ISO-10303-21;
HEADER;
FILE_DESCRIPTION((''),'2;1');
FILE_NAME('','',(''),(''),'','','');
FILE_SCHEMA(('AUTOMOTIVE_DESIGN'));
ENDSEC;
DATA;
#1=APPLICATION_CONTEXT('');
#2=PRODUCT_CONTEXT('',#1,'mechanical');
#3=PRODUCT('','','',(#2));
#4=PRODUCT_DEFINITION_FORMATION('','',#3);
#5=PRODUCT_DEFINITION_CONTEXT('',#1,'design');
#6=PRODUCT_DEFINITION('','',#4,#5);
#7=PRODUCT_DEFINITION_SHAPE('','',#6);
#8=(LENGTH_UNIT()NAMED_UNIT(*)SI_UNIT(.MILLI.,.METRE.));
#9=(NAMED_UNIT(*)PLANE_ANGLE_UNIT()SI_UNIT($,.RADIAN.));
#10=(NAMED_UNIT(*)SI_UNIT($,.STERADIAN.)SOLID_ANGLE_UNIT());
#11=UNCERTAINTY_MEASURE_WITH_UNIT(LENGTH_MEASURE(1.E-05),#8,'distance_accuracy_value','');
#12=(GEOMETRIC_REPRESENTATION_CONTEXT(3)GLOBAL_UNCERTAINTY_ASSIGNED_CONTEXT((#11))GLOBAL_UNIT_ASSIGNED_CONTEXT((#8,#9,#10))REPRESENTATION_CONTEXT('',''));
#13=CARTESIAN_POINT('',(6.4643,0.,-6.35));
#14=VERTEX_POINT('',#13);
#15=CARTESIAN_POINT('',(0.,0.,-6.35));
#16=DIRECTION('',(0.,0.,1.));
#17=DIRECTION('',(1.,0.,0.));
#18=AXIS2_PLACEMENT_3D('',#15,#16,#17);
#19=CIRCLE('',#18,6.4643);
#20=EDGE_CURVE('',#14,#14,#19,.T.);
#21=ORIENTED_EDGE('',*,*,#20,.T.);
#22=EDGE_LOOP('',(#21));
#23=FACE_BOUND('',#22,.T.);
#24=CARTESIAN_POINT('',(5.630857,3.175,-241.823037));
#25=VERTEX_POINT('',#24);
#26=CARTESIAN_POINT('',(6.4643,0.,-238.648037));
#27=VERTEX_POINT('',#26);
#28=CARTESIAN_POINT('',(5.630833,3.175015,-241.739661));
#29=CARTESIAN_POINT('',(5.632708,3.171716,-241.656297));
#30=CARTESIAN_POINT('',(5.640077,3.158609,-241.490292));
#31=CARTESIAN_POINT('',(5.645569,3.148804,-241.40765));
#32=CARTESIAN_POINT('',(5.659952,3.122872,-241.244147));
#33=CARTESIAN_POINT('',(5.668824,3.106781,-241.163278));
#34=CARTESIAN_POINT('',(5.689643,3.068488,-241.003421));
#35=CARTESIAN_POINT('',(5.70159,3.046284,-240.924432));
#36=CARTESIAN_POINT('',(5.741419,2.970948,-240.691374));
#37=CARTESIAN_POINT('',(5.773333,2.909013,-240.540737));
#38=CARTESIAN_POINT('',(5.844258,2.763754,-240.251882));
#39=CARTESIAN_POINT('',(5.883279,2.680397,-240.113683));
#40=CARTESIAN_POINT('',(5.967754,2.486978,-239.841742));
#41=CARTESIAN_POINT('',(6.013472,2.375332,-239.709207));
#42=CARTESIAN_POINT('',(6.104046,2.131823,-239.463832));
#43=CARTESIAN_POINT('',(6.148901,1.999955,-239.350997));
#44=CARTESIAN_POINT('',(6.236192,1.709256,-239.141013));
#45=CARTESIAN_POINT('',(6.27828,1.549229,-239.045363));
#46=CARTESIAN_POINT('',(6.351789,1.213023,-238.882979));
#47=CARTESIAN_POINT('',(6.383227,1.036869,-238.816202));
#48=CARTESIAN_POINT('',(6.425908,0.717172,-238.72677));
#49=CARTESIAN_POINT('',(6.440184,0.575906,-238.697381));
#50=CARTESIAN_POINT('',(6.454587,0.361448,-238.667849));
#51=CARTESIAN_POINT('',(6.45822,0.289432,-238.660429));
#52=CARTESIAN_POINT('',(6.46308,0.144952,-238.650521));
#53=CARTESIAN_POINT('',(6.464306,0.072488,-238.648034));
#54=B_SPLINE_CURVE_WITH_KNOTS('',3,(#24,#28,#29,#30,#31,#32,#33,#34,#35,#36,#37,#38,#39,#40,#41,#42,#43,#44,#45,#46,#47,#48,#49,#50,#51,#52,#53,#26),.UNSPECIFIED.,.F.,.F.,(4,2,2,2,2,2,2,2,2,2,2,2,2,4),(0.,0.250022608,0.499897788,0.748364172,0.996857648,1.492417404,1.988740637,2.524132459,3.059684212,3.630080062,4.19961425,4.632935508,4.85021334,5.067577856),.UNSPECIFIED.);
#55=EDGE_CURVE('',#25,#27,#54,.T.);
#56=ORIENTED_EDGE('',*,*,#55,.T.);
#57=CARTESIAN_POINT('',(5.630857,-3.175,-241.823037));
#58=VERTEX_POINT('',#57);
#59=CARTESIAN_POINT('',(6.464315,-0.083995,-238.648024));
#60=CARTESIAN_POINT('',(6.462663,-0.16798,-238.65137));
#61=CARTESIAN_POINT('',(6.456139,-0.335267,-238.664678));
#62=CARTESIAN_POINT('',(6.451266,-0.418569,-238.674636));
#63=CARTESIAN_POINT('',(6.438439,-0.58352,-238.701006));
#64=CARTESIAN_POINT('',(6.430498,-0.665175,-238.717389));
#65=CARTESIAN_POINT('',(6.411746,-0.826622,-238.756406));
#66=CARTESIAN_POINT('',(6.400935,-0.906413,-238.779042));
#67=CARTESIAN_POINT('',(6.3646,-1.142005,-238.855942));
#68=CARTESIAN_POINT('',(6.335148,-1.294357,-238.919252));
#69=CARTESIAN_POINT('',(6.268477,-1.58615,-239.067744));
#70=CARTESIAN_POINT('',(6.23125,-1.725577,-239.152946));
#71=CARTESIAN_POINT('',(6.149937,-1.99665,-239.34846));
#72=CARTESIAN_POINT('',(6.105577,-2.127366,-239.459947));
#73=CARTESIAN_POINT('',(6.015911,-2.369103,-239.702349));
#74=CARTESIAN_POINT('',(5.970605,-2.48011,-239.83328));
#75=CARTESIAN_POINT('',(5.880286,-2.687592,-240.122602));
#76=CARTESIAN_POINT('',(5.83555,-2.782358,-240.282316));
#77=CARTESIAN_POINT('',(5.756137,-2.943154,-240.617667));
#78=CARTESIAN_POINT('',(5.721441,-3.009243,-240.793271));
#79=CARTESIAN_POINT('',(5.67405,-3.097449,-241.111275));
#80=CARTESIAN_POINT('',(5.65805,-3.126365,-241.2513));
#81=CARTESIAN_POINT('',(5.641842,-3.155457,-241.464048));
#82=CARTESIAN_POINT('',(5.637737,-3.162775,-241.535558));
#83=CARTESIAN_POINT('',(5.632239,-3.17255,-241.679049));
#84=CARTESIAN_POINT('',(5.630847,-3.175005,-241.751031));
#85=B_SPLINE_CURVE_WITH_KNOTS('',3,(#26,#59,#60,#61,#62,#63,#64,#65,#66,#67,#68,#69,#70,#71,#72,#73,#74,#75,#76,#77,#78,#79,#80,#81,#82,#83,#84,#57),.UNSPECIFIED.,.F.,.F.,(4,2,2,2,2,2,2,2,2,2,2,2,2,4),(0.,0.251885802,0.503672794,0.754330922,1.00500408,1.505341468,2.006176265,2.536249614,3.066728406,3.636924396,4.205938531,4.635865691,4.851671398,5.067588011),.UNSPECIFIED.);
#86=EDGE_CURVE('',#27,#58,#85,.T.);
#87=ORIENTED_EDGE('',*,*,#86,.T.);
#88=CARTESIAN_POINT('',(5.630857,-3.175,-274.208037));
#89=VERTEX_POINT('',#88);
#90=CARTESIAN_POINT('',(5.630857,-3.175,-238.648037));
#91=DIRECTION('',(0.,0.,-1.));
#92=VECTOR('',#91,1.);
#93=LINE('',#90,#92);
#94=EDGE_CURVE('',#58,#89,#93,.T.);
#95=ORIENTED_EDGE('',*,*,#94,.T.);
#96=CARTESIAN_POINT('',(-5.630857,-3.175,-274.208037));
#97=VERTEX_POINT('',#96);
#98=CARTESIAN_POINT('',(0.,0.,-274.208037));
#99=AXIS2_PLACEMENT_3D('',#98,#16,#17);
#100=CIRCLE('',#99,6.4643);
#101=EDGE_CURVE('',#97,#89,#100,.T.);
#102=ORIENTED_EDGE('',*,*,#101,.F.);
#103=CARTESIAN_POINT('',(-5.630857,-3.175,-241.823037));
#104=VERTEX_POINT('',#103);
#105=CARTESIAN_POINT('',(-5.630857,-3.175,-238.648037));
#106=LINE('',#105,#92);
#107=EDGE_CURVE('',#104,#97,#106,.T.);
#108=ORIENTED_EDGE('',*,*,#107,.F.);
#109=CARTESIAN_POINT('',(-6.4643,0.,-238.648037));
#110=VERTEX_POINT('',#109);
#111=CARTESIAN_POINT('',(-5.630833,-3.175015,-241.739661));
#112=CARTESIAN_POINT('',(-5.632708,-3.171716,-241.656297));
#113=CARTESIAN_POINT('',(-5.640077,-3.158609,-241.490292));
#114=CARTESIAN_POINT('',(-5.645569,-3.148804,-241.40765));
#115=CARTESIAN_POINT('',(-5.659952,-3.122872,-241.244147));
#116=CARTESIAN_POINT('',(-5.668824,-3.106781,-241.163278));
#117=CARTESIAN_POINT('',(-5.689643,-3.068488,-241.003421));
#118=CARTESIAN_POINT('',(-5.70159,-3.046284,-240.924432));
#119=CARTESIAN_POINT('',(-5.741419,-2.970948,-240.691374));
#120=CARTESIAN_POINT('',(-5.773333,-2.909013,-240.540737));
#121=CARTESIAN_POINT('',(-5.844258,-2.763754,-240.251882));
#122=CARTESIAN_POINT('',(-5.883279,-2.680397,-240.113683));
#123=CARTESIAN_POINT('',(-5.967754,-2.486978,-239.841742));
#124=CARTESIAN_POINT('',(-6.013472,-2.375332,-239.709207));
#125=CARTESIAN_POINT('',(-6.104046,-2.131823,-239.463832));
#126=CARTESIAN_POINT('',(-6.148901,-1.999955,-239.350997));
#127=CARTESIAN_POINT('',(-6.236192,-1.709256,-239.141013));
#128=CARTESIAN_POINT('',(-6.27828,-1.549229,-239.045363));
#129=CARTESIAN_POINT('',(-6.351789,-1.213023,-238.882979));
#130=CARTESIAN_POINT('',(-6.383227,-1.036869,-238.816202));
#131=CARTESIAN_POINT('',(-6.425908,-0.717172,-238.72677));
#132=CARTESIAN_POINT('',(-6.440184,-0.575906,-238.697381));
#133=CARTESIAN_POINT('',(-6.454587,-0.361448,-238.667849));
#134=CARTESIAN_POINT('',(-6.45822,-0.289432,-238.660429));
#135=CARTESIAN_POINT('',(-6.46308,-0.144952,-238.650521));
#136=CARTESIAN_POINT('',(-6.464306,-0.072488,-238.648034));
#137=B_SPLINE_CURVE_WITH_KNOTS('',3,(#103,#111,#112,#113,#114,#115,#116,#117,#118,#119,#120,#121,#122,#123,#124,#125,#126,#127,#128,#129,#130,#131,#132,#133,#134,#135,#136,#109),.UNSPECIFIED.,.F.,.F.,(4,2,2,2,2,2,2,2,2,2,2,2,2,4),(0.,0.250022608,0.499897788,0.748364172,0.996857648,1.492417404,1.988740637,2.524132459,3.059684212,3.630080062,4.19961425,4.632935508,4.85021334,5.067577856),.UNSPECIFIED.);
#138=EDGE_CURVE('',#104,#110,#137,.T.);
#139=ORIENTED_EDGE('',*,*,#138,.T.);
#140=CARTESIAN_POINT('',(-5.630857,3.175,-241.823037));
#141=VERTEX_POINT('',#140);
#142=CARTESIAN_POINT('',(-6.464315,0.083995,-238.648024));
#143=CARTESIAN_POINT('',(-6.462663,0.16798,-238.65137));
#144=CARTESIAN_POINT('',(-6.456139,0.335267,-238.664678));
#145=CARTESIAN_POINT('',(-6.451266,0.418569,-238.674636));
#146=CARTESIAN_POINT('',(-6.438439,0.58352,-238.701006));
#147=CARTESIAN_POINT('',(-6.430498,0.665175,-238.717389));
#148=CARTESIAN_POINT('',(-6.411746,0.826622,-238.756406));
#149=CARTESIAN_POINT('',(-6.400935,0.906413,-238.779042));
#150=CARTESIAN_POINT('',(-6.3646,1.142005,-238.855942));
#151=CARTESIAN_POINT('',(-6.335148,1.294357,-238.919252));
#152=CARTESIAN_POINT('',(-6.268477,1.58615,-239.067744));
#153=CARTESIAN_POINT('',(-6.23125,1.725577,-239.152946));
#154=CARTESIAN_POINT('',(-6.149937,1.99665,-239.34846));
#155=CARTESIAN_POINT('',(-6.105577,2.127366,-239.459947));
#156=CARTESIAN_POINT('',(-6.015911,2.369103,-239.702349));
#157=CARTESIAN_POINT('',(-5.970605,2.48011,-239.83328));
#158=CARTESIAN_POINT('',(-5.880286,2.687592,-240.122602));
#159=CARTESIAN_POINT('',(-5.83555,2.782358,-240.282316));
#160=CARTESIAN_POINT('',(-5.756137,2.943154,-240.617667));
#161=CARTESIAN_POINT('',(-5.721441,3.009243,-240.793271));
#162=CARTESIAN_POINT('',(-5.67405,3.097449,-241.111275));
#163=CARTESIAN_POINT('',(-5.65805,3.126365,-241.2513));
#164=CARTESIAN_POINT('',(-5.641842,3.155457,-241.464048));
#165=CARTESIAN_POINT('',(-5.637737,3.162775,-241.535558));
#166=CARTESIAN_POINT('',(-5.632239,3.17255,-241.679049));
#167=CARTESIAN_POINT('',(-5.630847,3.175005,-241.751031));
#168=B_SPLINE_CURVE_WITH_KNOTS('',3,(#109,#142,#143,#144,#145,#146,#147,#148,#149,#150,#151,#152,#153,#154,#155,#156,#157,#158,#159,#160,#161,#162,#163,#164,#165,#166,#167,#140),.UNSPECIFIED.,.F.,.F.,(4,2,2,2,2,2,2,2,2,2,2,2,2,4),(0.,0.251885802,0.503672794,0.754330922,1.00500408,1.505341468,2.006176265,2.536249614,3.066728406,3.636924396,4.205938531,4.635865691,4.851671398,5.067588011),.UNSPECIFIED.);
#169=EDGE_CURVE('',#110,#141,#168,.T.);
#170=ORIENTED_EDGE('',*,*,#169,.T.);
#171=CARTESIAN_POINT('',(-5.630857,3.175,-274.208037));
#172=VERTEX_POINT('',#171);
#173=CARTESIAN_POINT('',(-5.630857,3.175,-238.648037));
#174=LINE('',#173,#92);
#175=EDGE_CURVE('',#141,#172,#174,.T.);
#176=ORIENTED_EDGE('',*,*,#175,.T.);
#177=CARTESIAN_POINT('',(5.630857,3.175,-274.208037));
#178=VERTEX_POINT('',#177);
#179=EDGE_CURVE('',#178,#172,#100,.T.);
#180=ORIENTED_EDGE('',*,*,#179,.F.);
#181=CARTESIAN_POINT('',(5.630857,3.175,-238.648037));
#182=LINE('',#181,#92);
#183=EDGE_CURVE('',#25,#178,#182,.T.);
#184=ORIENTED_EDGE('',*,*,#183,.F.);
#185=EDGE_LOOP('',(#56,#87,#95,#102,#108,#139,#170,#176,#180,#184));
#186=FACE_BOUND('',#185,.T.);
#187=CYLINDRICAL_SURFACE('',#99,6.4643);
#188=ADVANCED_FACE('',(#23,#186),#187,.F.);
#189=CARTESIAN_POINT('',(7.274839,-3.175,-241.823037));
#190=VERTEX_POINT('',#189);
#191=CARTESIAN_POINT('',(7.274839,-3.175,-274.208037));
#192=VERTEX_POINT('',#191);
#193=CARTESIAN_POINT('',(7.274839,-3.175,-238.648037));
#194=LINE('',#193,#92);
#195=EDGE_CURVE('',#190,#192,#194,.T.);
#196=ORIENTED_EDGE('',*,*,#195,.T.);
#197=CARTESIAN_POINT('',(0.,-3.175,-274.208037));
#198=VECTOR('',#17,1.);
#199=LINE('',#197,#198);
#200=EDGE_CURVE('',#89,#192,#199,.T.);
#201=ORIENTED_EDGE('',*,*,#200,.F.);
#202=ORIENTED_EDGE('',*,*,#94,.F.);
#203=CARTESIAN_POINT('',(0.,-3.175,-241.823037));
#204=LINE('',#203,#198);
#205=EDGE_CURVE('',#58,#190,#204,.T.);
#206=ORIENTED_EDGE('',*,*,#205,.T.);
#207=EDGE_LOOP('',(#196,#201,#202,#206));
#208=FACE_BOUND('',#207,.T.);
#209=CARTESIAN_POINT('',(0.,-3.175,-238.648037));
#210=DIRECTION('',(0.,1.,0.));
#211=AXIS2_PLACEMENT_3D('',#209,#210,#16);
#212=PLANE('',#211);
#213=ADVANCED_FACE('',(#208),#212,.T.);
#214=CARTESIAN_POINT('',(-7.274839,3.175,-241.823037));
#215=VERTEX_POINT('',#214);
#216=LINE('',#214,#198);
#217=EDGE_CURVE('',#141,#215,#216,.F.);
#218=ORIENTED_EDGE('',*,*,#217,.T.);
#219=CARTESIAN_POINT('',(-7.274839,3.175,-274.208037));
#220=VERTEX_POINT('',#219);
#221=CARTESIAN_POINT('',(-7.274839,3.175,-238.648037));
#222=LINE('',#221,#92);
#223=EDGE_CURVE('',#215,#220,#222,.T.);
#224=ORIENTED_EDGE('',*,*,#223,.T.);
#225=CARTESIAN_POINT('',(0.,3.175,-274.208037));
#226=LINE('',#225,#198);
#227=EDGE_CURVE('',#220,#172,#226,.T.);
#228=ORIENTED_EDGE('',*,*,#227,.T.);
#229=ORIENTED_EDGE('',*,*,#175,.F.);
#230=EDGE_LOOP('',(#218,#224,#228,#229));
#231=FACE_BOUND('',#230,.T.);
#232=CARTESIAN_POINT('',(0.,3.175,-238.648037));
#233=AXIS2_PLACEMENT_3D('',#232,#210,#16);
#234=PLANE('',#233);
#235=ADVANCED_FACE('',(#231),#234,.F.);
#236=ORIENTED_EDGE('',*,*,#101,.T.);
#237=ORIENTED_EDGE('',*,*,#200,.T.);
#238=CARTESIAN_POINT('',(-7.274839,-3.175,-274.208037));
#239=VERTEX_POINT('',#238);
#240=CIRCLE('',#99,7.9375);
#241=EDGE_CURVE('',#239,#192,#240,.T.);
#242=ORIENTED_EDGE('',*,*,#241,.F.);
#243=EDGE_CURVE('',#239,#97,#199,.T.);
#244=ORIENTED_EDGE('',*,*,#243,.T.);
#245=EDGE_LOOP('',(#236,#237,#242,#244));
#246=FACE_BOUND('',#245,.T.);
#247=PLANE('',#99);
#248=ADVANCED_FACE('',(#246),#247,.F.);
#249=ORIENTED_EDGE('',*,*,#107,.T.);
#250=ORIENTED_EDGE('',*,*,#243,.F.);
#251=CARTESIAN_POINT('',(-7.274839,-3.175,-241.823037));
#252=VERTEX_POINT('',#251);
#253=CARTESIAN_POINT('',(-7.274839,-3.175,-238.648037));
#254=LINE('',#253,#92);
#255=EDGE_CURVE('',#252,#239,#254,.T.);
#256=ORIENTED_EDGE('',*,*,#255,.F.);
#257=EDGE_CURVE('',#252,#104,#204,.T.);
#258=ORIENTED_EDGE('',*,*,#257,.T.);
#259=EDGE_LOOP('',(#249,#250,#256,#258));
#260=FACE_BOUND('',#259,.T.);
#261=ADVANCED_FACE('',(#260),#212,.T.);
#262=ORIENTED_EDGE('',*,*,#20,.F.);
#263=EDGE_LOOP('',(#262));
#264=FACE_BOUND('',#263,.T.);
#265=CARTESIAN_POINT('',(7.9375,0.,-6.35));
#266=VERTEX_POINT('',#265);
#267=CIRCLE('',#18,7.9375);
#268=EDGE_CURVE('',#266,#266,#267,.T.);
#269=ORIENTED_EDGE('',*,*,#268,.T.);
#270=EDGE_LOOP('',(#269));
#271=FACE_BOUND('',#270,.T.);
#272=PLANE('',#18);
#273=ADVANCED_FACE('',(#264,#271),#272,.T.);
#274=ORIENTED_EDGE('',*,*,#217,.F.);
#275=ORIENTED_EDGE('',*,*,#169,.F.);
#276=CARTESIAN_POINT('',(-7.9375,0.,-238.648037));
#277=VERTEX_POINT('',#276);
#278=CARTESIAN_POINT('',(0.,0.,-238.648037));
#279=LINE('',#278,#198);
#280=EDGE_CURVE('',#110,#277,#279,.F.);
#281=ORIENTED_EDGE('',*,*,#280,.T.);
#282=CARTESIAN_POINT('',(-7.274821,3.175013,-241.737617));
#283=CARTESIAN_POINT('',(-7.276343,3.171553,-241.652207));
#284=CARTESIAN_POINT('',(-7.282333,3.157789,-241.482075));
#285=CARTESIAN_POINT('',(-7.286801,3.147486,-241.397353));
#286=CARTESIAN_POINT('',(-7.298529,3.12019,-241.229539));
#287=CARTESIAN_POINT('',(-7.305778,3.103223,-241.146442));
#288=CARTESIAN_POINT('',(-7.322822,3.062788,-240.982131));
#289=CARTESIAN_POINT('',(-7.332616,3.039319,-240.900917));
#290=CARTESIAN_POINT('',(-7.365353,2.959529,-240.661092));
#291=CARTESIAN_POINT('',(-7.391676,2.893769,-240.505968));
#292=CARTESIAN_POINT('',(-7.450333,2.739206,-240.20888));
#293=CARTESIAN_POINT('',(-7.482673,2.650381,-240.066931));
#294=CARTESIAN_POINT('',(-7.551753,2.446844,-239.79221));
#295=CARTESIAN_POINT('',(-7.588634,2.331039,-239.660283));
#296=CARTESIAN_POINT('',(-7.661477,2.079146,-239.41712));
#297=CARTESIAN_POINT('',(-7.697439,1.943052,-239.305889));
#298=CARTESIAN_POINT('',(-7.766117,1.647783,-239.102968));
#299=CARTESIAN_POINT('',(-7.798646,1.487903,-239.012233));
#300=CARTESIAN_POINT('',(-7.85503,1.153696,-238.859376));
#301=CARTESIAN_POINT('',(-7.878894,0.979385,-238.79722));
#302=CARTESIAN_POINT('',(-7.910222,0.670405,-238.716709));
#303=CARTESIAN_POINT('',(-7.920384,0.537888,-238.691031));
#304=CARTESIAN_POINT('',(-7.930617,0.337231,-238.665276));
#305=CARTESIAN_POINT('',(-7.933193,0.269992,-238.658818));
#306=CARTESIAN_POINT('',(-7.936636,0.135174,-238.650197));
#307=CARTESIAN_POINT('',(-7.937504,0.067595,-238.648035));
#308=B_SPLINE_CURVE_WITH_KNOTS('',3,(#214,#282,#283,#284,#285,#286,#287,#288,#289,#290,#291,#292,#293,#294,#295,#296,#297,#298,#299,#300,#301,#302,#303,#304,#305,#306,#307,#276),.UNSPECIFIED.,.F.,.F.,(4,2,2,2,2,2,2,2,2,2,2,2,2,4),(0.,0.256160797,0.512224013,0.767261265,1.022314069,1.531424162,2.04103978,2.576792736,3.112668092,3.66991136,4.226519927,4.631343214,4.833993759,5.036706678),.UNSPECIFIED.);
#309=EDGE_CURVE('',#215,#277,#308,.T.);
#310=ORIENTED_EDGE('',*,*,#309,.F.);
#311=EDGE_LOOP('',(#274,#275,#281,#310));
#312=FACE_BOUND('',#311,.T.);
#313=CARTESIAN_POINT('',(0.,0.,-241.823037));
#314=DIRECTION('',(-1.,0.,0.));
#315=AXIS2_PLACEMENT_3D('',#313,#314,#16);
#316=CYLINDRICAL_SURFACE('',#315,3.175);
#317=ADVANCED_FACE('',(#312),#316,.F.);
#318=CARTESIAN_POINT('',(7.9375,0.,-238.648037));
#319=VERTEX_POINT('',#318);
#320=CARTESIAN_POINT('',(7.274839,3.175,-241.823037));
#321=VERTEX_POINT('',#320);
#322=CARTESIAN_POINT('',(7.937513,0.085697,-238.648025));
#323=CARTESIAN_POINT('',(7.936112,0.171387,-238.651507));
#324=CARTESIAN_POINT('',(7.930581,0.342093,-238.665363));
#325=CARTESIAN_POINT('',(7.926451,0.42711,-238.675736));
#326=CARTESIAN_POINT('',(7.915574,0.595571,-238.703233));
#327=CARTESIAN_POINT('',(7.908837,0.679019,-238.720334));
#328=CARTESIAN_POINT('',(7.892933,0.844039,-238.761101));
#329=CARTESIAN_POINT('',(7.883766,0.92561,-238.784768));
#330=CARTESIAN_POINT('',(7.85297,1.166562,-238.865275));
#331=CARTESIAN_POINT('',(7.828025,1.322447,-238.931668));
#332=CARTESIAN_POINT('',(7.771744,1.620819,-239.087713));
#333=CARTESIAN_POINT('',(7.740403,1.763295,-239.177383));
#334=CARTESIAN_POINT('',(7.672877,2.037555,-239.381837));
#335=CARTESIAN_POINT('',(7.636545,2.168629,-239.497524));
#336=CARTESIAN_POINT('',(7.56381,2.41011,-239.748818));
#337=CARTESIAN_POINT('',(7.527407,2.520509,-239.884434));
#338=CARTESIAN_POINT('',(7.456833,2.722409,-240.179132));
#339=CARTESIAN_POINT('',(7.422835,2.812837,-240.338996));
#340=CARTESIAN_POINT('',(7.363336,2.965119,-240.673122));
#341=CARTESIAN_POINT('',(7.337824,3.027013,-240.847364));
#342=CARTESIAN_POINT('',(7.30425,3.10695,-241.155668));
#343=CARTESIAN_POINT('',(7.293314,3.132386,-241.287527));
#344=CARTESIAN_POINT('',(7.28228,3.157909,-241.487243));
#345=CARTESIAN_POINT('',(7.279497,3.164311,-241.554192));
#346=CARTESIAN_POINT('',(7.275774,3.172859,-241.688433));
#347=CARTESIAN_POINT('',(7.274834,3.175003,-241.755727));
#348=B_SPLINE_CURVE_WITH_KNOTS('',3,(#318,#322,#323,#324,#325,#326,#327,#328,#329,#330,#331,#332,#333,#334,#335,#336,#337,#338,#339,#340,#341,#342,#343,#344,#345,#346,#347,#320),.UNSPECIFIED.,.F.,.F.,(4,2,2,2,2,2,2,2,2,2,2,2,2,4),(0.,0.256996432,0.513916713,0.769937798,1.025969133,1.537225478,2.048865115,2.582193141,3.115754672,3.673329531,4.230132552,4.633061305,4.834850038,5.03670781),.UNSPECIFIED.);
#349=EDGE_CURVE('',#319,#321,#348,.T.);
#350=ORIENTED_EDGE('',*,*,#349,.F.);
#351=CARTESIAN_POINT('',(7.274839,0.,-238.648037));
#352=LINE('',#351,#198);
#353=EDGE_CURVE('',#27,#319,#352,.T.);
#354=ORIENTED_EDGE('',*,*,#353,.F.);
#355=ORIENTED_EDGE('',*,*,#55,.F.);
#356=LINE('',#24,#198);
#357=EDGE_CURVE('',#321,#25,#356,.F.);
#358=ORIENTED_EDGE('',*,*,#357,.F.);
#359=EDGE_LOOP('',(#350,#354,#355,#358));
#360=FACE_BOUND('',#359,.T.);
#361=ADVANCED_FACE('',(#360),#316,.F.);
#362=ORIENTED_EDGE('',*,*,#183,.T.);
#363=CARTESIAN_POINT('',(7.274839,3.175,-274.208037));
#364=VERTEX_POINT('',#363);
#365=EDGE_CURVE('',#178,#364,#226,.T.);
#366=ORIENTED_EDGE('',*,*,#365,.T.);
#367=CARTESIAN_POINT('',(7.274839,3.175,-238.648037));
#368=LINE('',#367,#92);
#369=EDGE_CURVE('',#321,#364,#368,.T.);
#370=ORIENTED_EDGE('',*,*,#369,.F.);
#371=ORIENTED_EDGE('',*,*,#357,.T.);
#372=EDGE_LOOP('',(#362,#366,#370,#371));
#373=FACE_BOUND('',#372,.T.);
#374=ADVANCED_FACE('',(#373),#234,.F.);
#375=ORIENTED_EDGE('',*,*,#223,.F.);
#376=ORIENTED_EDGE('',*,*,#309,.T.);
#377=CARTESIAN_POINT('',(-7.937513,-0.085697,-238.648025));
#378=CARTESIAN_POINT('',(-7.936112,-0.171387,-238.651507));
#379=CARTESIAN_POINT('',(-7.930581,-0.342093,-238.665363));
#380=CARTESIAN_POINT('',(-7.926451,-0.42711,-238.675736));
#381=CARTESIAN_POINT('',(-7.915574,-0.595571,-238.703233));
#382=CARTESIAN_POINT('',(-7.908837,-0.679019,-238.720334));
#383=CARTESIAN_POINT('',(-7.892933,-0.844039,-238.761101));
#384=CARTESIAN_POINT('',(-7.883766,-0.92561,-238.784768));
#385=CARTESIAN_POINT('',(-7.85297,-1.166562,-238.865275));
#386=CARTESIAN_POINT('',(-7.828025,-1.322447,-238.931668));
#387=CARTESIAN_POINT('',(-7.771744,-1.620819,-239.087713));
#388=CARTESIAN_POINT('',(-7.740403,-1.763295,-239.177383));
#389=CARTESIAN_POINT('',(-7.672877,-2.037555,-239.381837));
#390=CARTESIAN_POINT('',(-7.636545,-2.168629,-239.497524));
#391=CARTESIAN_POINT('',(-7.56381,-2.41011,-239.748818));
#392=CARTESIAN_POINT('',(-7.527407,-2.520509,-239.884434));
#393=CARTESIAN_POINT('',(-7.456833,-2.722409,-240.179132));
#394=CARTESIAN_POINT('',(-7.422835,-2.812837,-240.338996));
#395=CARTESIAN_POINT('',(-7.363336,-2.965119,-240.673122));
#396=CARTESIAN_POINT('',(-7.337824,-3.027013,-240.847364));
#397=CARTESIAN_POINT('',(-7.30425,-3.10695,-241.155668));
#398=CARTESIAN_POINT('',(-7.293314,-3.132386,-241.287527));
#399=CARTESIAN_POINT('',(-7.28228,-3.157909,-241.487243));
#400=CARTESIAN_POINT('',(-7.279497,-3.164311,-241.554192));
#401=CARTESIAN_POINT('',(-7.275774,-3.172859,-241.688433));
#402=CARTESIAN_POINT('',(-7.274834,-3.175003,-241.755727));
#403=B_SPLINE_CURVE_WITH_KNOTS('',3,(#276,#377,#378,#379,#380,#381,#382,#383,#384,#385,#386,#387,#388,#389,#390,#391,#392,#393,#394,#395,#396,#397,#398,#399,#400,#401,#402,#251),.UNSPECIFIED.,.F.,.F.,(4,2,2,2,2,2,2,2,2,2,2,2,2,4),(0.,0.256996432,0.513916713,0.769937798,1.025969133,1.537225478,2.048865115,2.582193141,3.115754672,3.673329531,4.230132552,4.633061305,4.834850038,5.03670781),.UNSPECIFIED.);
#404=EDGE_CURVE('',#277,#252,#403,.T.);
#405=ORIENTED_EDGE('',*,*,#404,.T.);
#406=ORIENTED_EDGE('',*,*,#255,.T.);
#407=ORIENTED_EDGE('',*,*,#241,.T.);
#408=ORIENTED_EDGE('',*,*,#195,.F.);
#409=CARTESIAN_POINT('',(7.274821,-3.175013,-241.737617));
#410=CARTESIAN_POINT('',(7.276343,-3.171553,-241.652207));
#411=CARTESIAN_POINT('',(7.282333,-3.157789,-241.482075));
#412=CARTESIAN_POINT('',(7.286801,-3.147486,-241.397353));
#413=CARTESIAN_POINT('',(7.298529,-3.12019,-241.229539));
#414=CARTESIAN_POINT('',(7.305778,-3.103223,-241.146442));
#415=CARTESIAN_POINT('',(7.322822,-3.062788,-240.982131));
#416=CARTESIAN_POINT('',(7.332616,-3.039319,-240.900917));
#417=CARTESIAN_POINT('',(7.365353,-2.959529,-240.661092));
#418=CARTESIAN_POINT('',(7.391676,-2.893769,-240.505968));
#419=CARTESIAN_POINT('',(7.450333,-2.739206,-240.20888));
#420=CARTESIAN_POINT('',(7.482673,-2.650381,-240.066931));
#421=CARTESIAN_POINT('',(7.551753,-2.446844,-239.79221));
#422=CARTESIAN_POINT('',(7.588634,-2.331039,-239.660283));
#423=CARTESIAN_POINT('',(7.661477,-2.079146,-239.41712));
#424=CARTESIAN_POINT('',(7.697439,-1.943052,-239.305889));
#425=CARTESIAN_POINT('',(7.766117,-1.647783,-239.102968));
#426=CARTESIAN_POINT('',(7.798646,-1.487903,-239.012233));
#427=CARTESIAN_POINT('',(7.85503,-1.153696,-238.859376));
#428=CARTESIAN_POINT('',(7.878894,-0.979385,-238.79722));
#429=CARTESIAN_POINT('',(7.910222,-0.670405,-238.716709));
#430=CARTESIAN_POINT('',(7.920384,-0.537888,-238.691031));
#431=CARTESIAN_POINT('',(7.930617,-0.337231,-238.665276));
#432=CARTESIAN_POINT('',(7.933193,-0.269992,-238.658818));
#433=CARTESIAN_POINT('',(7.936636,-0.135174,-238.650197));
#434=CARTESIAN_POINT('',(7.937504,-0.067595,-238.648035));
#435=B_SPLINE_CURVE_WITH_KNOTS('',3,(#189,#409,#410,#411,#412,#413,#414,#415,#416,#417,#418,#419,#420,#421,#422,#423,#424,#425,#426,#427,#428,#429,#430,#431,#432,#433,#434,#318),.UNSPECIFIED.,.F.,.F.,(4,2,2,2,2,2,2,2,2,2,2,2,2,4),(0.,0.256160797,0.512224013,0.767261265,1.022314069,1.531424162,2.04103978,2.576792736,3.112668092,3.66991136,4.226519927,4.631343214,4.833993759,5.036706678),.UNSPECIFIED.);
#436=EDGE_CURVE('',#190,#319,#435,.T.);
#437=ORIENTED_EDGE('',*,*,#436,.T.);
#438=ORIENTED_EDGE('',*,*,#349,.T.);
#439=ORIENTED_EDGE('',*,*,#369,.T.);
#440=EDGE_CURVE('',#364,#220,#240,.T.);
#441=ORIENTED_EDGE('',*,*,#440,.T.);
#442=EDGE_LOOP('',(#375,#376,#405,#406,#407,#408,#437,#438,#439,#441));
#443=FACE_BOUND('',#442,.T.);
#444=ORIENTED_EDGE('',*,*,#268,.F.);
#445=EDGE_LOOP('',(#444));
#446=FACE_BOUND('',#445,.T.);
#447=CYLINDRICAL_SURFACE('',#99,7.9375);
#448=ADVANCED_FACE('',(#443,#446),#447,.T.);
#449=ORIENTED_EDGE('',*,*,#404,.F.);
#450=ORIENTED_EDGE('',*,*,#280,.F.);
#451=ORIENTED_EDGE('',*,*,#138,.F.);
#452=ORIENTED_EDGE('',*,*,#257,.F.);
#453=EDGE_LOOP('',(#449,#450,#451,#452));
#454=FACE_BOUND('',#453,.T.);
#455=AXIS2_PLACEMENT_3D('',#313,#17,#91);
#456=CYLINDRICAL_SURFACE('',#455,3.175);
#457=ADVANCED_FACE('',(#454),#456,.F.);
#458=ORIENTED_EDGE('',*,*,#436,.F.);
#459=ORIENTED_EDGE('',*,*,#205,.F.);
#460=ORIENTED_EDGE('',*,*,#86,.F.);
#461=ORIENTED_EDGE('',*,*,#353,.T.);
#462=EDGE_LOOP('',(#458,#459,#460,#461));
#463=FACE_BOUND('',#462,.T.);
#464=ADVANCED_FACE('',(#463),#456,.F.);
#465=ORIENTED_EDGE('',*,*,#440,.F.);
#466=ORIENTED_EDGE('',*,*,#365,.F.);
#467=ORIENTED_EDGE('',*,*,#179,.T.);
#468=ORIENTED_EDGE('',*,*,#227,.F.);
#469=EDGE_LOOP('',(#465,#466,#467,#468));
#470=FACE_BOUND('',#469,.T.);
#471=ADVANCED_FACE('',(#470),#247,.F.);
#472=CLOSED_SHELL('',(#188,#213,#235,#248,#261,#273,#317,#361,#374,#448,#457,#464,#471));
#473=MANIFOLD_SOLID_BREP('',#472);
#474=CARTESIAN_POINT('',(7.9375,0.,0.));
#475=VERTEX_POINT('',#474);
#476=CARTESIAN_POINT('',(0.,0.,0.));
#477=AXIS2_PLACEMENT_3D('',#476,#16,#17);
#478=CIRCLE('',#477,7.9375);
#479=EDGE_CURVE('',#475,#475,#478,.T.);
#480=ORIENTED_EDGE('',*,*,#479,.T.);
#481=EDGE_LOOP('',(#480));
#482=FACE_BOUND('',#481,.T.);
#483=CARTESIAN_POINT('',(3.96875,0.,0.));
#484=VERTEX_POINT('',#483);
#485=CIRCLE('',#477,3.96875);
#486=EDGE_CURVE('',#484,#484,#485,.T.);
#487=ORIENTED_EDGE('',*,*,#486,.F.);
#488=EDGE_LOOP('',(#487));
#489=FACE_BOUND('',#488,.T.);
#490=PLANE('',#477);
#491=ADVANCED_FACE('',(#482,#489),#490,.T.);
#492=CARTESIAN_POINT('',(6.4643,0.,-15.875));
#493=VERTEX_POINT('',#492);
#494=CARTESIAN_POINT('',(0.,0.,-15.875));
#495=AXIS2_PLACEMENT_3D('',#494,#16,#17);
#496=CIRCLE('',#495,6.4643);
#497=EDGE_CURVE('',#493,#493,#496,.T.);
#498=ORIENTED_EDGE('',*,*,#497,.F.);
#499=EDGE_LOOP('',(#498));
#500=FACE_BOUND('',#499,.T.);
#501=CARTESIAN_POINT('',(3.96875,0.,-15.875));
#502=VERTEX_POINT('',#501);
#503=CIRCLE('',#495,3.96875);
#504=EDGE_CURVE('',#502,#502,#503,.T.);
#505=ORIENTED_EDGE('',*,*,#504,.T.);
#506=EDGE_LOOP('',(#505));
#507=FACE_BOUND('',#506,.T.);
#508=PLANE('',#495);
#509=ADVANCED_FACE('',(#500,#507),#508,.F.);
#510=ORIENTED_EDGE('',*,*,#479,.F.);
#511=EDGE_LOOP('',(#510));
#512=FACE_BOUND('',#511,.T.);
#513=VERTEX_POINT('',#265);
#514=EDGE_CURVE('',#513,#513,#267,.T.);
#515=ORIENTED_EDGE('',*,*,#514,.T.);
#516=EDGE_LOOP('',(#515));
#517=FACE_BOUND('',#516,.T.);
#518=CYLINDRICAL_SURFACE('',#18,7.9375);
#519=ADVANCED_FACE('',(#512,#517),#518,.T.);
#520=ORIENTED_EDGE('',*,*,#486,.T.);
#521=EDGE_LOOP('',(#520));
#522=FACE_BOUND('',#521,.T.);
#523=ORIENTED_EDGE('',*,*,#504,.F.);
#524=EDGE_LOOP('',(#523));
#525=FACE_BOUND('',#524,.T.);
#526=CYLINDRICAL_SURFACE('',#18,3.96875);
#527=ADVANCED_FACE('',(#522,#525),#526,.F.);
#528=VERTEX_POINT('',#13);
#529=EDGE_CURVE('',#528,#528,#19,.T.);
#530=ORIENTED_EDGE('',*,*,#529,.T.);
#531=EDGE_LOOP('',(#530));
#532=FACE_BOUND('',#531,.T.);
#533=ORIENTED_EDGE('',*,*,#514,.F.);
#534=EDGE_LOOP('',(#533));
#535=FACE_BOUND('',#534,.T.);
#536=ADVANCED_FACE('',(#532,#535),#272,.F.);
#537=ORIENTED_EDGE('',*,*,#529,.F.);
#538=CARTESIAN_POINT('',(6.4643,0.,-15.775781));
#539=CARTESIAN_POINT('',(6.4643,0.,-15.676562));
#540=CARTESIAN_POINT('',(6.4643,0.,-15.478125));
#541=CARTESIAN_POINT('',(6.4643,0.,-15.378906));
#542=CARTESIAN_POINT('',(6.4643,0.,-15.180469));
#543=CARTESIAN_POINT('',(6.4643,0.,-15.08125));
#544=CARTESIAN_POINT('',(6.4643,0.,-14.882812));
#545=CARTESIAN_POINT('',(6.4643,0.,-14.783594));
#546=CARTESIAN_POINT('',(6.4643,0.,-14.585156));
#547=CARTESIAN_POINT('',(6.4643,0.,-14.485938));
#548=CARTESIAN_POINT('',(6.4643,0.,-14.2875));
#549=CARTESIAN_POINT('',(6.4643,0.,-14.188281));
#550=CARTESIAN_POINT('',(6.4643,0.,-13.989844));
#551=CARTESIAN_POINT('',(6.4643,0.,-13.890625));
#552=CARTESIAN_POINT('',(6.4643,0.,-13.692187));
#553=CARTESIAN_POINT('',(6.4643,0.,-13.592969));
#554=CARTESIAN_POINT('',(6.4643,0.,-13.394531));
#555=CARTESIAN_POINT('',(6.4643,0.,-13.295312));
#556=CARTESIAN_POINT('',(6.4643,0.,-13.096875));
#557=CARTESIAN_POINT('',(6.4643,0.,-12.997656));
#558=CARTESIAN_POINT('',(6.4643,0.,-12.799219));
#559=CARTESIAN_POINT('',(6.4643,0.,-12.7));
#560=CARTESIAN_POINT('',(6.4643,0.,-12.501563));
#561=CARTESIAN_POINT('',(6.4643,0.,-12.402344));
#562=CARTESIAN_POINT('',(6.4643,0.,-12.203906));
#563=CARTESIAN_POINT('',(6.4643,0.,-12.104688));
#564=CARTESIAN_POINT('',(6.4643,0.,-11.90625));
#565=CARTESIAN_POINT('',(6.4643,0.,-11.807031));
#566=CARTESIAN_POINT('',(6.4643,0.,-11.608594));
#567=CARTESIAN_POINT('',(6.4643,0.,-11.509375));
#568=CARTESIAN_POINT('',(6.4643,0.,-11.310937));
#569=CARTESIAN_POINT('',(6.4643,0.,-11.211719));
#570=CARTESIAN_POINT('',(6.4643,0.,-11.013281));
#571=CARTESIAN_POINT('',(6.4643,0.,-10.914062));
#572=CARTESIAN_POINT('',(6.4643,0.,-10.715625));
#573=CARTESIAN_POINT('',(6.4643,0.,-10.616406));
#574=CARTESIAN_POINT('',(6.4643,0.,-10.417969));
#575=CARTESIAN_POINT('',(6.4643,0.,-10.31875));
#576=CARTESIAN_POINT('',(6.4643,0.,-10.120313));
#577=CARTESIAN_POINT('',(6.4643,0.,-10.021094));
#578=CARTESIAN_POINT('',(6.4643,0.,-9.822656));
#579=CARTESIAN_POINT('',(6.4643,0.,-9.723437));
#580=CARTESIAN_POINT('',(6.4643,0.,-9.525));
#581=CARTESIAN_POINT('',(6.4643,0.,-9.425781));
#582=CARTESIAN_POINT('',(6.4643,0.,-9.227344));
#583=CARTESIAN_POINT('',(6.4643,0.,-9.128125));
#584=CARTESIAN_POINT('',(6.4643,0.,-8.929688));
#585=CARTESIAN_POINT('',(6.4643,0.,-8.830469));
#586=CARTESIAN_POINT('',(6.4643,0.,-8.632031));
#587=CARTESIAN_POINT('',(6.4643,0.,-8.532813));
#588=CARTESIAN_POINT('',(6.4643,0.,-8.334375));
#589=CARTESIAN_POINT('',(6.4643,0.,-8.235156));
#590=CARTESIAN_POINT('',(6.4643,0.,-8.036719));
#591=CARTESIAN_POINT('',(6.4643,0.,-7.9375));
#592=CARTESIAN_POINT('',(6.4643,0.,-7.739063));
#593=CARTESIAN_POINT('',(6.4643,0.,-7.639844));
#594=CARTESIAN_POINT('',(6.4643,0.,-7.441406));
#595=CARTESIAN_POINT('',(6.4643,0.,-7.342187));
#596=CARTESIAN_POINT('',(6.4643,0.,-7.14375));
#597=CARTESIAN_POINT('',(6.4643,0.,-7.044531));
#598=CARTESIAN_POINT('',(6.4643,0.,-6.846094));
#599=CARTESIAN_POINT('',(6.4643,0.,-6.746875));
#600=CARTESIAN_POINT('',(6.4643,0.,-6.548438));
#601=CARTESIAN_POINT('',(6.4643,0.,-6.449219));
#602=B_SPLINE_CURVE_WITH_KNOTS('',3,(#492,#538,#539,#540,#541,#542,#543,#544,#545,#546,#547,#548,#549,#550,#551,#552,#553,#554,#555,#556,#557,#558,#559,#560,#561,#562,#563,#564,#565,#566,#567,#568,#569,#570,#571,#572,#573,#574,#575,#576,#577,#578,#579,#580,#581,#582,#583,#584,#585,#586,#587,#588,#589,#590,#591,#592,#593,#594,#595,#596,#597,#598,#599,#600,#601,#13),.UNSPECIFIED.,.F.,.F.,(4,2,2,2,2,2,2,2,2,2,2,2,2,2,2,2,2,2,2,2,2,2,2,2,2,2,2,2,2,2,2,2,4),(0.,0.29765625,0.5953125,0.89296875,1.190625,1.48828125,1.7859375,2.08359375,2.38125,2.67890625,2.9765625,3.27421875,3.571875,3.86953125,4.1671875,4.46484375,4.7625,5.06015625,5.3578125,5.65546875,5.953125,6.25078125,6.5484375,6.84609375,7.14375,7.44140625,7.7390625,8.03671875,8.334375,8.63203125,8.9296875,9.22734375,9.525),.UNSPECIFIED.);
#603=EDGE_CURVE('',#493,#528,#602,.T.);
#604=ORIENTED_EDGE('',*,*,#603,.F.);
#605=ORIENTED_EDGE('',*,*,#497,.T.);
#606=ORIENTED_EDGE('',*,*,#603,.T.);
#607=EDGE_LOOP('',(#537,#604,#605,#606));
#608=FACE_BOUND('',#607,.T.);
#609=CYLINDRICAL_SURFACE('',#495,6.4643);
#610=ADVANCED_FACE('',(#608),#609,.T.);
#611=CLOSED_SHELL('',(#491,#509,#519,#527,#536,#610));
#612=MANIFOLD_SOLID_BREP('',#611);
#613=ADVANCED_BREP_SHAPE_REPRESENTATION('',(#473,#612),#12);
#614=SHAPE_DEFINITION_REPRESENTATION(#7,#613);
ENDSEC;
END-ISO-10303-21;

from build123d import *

# Parameters (mm, degrees)
THREADED_INSERT_1_1_DEPTH = 6.35
THREADED_START            = -6.35
THREADED_INSERT_1_2_DEPTH = 9.525
A_ARM_START               = -6.35
A_ARM_TUBE_DEPTH          = 267.858037
APEX_START                = -238.648037
APEX_SLOT_DEPTH           = 35.56
FILLET1_R                 = 3.175


with BuildPart() as part:
    # Sketch1 → Threaded insert 1-1 (new body)
    with BuildSketch(Plane.XY):
        with BuildLine():
            ThreePointArc((-2.38125, 3.175), (0, 3.96875), (2.38125, 3.175))
            Line((2.38125, 3.175), (5.630856905, 3.175))
            ThreePointArc((5.630856905, 3.175), (0, 6.4643), (-5.630856905, 3.175))
            Line((-5.630856905, 3.175), (-2.38125, 3.175))
        make_face()
        with BuildLine():
            ThreePointArc((-5.630856905, 3.175), (0, 6.4643), (5.630856905, 3.175))
            Line((5.630856905, 3.175), (7.274838916, 3.175))
            ThreePointArc((7.274838916, 3.175), (0, 7.9375), (-7.274838916, 3.175))
            Line((-7.274838916, 3.175), (-5.630856905, 3.175))
        make_face()
        with BuildLine():
            ThreePointArc((2.38125, 3.175), (3.549757914, 1.774878957), (3.96875, 0))
            Line((3.96875, 0), (6.4643, 0))
            ThreePointArc((6.4643, 0), (6.252468424, 1.641283978), (5.630856905, 3.175))
            Line((5.630856905, 3.175), (2.38125, 3.175))
        make_face()
        with BuildLine():
            Line((-6.4643, 0), (-3.96875, 0))
            ThreePointArc((-3.96875, 0), (-3.549757914, 1.774878957), (-2.38125, 3.175))
            Line((-2.38125, 3.175), (-5.630856905, 3.175))
            ThreePointArc((-5.630856905, 3.175), (-6.252468424, 1.641283978), (-6.4643, 0))
        make_face()
        with BuildLine():
            ThreePointArc((5.630856905, 3.175), (6.252468424, 1.641283978), (6.4643, 0))
            Line((6.4643, 0), (7.9375, 0))
            ThreePointArc((7.9375, 0), (7.770068859, 1.621707797), (7.274838916, 3.175))
            Line((7.274838916, 3.175), (5.630856905, 3.175))
        make_face()
        with BuildLine():
            Line((-7.9375, 0), (-6.4643, 0))
            ThreePointArc((-6.4643, 0), (-6.252468424, 1.641283978), (-5.630856905, 3.175))
            Line((-5.630856905, 3.175), (-7.274838916, 3.175))
            ThreePointArc((-7.274838916, 3.175), (-7.770068859, 1.621707797), (-7.9375, 0))
        make_face()
        with BuildLine():
            Line((7.9375, 0), (6.4643, 0))
            ThreePointArc((6.4643, 0), (6.252468424, -1.641283978), (5.630856905, -3.175))
            Line((5.630856905, -3.175), (7.274838916, -3.175))
            ThreePointArc((7.274838916, -3.175), (7.770068859, -1.621707797), (7.9375, 0))
        make_face()
        with BuildLine():
            ThreePointArc((-5.630856905, -3.175), (-6.252468424, -1.641283978), (-6.4643, 0))
            Line((-6.4643, 0), (-7.9375, 0))
            ThreePointArc((-7.9375, 0), (-7.770068859, -1.621707797), (-7.274838916, -3.175))
            Line((-7.274838916, -3.175), (-5.630856905, -3.175))
        make_face()
        with BuildLine():
            Line((6.4643, 0), (3.96875, 0))
            ThreePointArc((3.96875, 0), (3.549757914, -1.774878957), (2.38125, -3.175))
            Line((2.38125, -3.175), (5.630856905, -3.175))
            ThreePointArc((5.630856905, -3.175), (6.252468424, -1.641283978), (6.4643, 0))
        make_face()
        with BuildLine():
            ThreePointArc((-2.38125, -3.175), (-3.549757914, -1.774878957), (-3.96875, 0))
            Line((-3.96875, 0), (-6.4643, 0))
            ThreePointArc((-6.4643, 0), (-6.252468424, -1.641283978), (-5.630856905, -3.175))
            Line((-5.630856905, -3.175), (-2.38125, -3.175))
        make_face()
        with BuildLine():
            Line((5.630856905, -3.175), (2.38125, -3.175))
            ThreePointArc((2.38125, -3.175), (0, -3.96875), (-2.38125, -3.175))
            Line((-2.38125, -3.175), (-5.630856905, -3.175))
            ThreePointArc((-5.630856905, -3.175), (0, -6.4643), (5.630856905, -3.175))
        make_face()
        with BuildLine():
            Line((7.274838916, -3.175), (5.630856905, -3.175))
            ThreePointArc((5.630856905, -3.175), (0, -6.4643), (-5.630856905, -3.175))
            Line((-5.630856905, -3.175), (-7.274838916, -3.175))
            ThreePointArc((-7.274838916, -3.175), (0, -7.9375), (7.274838916, -3.175))
        make_face()
    extrude(amount=-THREADED_INSERT_1_1_DEPTH)

    # Sketch1<3> → Threaded insert 1-2 (add)
    with BuildSketch(Plane.XY.offset(THREADED_START)):
        with BuildLine():
            ThreePointArc((-2.38125, 3.175), (0, 3.96875), (2.38125, 3.175))
            Line((2.38125, 3.175), (5.630856905, 3.175))
            ThreePointArc((5.630856905, 3.175), (0, 6.4643), (-5.630856905, 3.175))
            Line((-5.630856905, 3.175), (-2.38125, 3.175))
        make_face()
        with BuildLine():
            ThreePointArc((2.38125, 3.175), (3.549757914, 1.774878957), (3.96875, 0))
            Line((3.96875, 0), (6.4643, 0))
            ThreePointArc((6.4643, 0), (6.252468424, 1.641283978), (5.630856905, 3.175))
            Line((5.630856905, 3.175), (2.38125, 3.175))
        make_face()
        with BuildLine():
            Line((-6.4643, 0), (-3.96875, 0))
            ThreePointArc((-3.96875, 0), (-3.549757914, 1.774878957), (-2.38125, 3.175))
            Line((-2.38125, 3.175), (-5.630856905, 3.175))
            ThreePointArc((-5.630856905, 3.175), (-6.252468424, 1.641283978), (-6.4643, 0))
        make_face()
        with BuildLine():
            Line((6.4643, 0), (3.96875, 0))
            ThreePointArc((3.96875, 0), (3.549757914, -1.774878957), (2.38125, -3.175))
            Line((2.38125, -3.175), (5.630856905, -3.175))
            ThreePointArc((5.630856905, -3.175), (6.252468424, -1.641283978), (6.4643, 0))
        make_face()
        with BuildLine():
            ThreePointArc((-2.38125, -3.175), (-3.549757914, -1.774878957), (-3.96875, 0))
            Line((-3.96875, 0), (-6.4643, 0))
            ThreePointArc((-6.4643, 0), (-6.252468424, -1.641283978), (-5.630856905, -3.175))
            Line((-5.630856905, -3.175), (-2.38125, -3.175))
        make_face()
        with BuildLine():
            Line((5.630856905, -3.175), (2.38125, -3.175))
            ThreePointArc((2.38125, -3.175), (0, -3.96875), (-2.38125, -3.175))
            Line((-2.38125, -3.175), (-5.630856905, -3.175))
            ThreePointArc((-5.630856905, -3.175), (0, -6.4643), (5.630856905, -3.175))
        make_face()
    extrude(amount=-THREADED_INSERT_1_2_DEPTH)


with BuildPart() as body_2:
    # Sketch1<4> → A-arm tube (new body)
    with BuildSketch(Plane.XY.offset(A_ARM_START)):
        with BuildLine():
            ThreePointArc((-5.630856905, 3.175), (0, 6.4643), (5.630856905, 3.175))
            Line((5.630856905, 3.175), (7.274838916, 3.175))
            ThreePointArc((7.274838916, 3.175), (0, 7.9375), (-7.274838916, 3.175))
            Line((-7.274838916, 3.175), (-5.630856905, 3.175))
        make_face()
        with BuildLine():
            ThreePointArc((5.630856905, 3.175), (6.252468424, 1.641283978), (6.4643, 0))
            Line((6.4643, 0), (7.9375, 0))
            ThreePointArc((7.9375, 0), (7.770068859, 1.621707797), (7.274838916, 3.175))
            Line((7.274838916, 3.175), (5.630856905, 3.175))
        make_face()
        with BuildLine():
            Line((-7.9375, 0), (-6.4643, 0))
            ThreePointArc((-6.4643, 0), (-6.252468424, 1.641283978), (-5.630856905, 3.175))
            Line((-5.630856905, 3.175), (-7.274838916, 3.175))
            ThreePointArc((-7.274838916, 3.175), (-7.770068859, 1.621707797), (-7.9375, 0))
        make_face()
        with BuildLine():
            Line((7.9375, 0), (6.4643, 0))
            ThreePointArc((6.4643, 0), (6.252468424, -1.641283978), (5.630856905, -3.175))
            Line((5.630856905, -3.175), (7.274838916, -3.175))
            ThreePointArc((7.274838916, -3.175), (7.770068859, -1.621707797), (7.9375, 0))
        make_face()
        with BuildLine():
            ThreePointArc((-5.630856905, -3.175), (-6.252468424, -1.641283978), (-6.4643, 0))
            Line((-6.4643, 0), (-7.9375, 0))
            ThreePointArc((-7.9375, 0), (-7.770068859, -1.621707797), (-7.274838916, -3.175))
            Line((-7.274838916, -3.175), (-5.630856905, -3.175))
        make_face()
        with BuildLine():
            Line((7.274838916, -3.175), (5.630856905, -3.175))
            ThreePointArc((5.630856905, -3.175), (0, -6.4643), (-5.630856905, -3.175))
            Line((-5.630856905, -3.175), (-7.274838916, -3.175))
            ThreePointArc((-7.274838916, -3.175), (0, -7.9375), (7.274838916, -3.175))
        make_face()
    extrude(amount=-A_ARM_TUBE_DEPTH)

    # Sketch1<5> → Apex slot (cut)
    with BuildSketch(Plane.XY.offset(APEX_START)):
        with BuildLine():
            ThreePointArc((5.630856905, 3.175), (6.252468424, 1.641283978), (6.4643, 0))
            Line((6.4643, 0), (7.9375, 0))
            ThreePointArc((7.9375, 0), (7.770068859, 1.621707797), (7.274838916, 3.175))
            Line((7.274838916, 3.175), (5.630856905, 3.175))
        make_face()
        with BuildLine():
            Line((-7.9375, 0), (-6.4643, 0))
            ThreePointArc((-6.4643, 0), (-6.252468424, 1.641283978), (-5.630856905, 3.175))
            Line((-5.630856905, 3.175), (-7.274838916, 3.175))
            ThreePointArc((-7.274838916, 3.175), (-7.770068859, 1.621707797), (-7.9375, 0))
        make_face()
        with BuildLine():
            Line((7.9375, 0), (6.4643, 0))
            ThreePointArc((6.4643, 0), (6.252468424, -1.641283978), (5.630856905, -3.175))
            Line((5.630856905, -3.175), (7.274838916, -3.175))
            ThreePointArc((7.274838916, -3.175), (7.770068859, -1.621707797), (7.9375, 0))
        make_face()
        with BuildLine():
            ThreePointArc((-5.630856905, -3.175), (-6.252468424, -1.641283978), (-6.4643, 0))
            Line((-6.4643, 0), (-7.9375, 0))
            ThreePointArc((-7.9375, 0), (-7.770068859, -1.621707797), (-7.274838916, -3.175))
            Line((-7.274838916, -3.175), (-5.630856905, -3.175))
        make_face()
    extrude(amount=-APEX_SLOT_DEPTH, mode=Mode.SUBTRACT)

    # Fillet1
    # the kernel refuses this fillet: 3.175 mm, written as the material it adds along each edge
    with BuildSketch(Plane(origin=(2.306643095, 3.175, -238.648037), x_dir=(0, 0, -1), z_dir=(-1, 0, 0))) as fillet1_piece_1_section:
        with BuildLine():
            CenterArc((FILLET1_R, FILLET1_R), FILLET1_R, 180, 90)
            Line((0, FILLET1_R), (0, 0))
            Line((0, 0), (FILLET1_R, 0))
        make_face()
    fillet1_piece_1 = extrude(amount=17.51898201, mode=Mode.PRIVATE)
    fillet1_piece_1 = fillet1_piece_1 - Plane(origin=(0, 0, -239.36776962), x_dir=(-0.8710698614669244, 0.49115913555994567, 0), z_dir=(0, 0, 1)) * Cylinder(6.4643, 48, mode=Mode.PRIVATE)
    fillet1_piece_1 = fillet1_piece_1 & Plane(origin=(0, 0, -239.36776962), x_dir=(-1, 0, 0), z_dir=(0, 0, 1)) * Cylinder(7.9375, 48, mode=Mode.PRIVATE)
    add(fillet1_piece_1)
    with BuildSketch(Plane(origin=(-15.212338916, -3.175, -238.648037), x_dir=(0, 0, -1), z_dir=(1, 0, 0))) as fillet1_piece_2_section:
        with BuildLine():
            CenterArc((FILLET1_R, FILLET1_R), FILLET1_R, 180, 90)
            Line((0, FILLET1_R), (0, 0))
            Line((0, 0), (FILLET1_R, 0))
        make_face()
    fillet1_piece_2 = extrude(amount=17.51898201, mode=Mode.PRIVATE)
    fillet1_piece_2 = fillet1_piece_2 - Plane(origin=(0, 0, -239.367769783), x_dir=(-0.8710698614669244, 0.49115913555994567, 0), z_dir=(0, 0, 1)) * Cylinder(6.4643, 48, mode=Mode.PRIVATE)
    fillet1_piece_2 = fillet1_piece_2 & Plane(origin=(0, 0, -239.367769783), x_dir=(-1, 0, 0), z_dir=(0, 0, 1)) * Cylinder(7.9375, 48, mode=Mode.PRIVATE)
    add(fillet1_piece_2)
    with BuildSketch(Plane(origin=(-2.306643095, -3.175, -238.648037), x_dir=(0, 0, -1), z_dir=(1, 0, 0))) as fillet1_piece_3_section:
        with BuildLine():
            CenterArc((FILLET1_R, FILLET1_R), FILLET1_R, 180, 90)
            Line((0, FILLET1_R), (0, 0))
            Line((0, 0), (FILLET1_R, 0))
        make_face()
    fillet1_piece_3 = extrude(amount=17.51898201, mode=Mode.PRIVATE)
    fillet1_piece_3 = fillet1_piece_3 - Plane(origin=(0, 0, -239.36776962), x_dir=(-0.8710698614669244, 0.49115913555994567, 0), z_dir=(0, 0, 1)) * Cylinder(6.4643, 48, mode=Mode.PRIVATE)
    fillet1_piece_3 = fillet1_piece_3 & Plane(origin=(0, 0, -239.36776962), x_dir=(-1, 0, 0), z_dir=(0, 0, 1)) * Cylinder(7.9375, 48, mode=Mode.PRIVATE)
    add(fillet1_piece_3)
    with BuildSketch(Plane(origin=(15.212338916, 3.175, -238.648037), x_dir=(0, -1, 0), z_dir=(-1, 0, 0))) as fillet1_piece_4_section:
        with BuildLine():
            CenterArc((FILLET1_R, -FILLET1_R), FILLET1_R, 90, 90)
            Line((0, -FILLET1_R), (0, 0))
            Line((0, 0), (FILLET1_R, 0))
        make_face()
    fillet1_piece_4 = extrude(amount=17.51898201, mode=Mode.PRIVATE)
    fillet1_piece_4 = fillet1_piece_4 - Plane(origin=(0, 0, -239.367769609), x_dir=(-0.8710698614669244, 0.49115913555994567, 0), z_dir=(0, 0, 1)) * Cylinder(6.4643, 48, mode=Mode.PRIVATE)
    fillet1_piece_4 = fillet1_piece_4 & Plane(origin=(0, 0, -239.367769609), x_dir=(-1, 0, 0), z_dir=(0, 0, 1)) * Cylinder(7.9375, 48, mode=Mode.PRIVATE)
    add(fillet1_piece_4)


solid = Compound([part.part, body_2.part])
